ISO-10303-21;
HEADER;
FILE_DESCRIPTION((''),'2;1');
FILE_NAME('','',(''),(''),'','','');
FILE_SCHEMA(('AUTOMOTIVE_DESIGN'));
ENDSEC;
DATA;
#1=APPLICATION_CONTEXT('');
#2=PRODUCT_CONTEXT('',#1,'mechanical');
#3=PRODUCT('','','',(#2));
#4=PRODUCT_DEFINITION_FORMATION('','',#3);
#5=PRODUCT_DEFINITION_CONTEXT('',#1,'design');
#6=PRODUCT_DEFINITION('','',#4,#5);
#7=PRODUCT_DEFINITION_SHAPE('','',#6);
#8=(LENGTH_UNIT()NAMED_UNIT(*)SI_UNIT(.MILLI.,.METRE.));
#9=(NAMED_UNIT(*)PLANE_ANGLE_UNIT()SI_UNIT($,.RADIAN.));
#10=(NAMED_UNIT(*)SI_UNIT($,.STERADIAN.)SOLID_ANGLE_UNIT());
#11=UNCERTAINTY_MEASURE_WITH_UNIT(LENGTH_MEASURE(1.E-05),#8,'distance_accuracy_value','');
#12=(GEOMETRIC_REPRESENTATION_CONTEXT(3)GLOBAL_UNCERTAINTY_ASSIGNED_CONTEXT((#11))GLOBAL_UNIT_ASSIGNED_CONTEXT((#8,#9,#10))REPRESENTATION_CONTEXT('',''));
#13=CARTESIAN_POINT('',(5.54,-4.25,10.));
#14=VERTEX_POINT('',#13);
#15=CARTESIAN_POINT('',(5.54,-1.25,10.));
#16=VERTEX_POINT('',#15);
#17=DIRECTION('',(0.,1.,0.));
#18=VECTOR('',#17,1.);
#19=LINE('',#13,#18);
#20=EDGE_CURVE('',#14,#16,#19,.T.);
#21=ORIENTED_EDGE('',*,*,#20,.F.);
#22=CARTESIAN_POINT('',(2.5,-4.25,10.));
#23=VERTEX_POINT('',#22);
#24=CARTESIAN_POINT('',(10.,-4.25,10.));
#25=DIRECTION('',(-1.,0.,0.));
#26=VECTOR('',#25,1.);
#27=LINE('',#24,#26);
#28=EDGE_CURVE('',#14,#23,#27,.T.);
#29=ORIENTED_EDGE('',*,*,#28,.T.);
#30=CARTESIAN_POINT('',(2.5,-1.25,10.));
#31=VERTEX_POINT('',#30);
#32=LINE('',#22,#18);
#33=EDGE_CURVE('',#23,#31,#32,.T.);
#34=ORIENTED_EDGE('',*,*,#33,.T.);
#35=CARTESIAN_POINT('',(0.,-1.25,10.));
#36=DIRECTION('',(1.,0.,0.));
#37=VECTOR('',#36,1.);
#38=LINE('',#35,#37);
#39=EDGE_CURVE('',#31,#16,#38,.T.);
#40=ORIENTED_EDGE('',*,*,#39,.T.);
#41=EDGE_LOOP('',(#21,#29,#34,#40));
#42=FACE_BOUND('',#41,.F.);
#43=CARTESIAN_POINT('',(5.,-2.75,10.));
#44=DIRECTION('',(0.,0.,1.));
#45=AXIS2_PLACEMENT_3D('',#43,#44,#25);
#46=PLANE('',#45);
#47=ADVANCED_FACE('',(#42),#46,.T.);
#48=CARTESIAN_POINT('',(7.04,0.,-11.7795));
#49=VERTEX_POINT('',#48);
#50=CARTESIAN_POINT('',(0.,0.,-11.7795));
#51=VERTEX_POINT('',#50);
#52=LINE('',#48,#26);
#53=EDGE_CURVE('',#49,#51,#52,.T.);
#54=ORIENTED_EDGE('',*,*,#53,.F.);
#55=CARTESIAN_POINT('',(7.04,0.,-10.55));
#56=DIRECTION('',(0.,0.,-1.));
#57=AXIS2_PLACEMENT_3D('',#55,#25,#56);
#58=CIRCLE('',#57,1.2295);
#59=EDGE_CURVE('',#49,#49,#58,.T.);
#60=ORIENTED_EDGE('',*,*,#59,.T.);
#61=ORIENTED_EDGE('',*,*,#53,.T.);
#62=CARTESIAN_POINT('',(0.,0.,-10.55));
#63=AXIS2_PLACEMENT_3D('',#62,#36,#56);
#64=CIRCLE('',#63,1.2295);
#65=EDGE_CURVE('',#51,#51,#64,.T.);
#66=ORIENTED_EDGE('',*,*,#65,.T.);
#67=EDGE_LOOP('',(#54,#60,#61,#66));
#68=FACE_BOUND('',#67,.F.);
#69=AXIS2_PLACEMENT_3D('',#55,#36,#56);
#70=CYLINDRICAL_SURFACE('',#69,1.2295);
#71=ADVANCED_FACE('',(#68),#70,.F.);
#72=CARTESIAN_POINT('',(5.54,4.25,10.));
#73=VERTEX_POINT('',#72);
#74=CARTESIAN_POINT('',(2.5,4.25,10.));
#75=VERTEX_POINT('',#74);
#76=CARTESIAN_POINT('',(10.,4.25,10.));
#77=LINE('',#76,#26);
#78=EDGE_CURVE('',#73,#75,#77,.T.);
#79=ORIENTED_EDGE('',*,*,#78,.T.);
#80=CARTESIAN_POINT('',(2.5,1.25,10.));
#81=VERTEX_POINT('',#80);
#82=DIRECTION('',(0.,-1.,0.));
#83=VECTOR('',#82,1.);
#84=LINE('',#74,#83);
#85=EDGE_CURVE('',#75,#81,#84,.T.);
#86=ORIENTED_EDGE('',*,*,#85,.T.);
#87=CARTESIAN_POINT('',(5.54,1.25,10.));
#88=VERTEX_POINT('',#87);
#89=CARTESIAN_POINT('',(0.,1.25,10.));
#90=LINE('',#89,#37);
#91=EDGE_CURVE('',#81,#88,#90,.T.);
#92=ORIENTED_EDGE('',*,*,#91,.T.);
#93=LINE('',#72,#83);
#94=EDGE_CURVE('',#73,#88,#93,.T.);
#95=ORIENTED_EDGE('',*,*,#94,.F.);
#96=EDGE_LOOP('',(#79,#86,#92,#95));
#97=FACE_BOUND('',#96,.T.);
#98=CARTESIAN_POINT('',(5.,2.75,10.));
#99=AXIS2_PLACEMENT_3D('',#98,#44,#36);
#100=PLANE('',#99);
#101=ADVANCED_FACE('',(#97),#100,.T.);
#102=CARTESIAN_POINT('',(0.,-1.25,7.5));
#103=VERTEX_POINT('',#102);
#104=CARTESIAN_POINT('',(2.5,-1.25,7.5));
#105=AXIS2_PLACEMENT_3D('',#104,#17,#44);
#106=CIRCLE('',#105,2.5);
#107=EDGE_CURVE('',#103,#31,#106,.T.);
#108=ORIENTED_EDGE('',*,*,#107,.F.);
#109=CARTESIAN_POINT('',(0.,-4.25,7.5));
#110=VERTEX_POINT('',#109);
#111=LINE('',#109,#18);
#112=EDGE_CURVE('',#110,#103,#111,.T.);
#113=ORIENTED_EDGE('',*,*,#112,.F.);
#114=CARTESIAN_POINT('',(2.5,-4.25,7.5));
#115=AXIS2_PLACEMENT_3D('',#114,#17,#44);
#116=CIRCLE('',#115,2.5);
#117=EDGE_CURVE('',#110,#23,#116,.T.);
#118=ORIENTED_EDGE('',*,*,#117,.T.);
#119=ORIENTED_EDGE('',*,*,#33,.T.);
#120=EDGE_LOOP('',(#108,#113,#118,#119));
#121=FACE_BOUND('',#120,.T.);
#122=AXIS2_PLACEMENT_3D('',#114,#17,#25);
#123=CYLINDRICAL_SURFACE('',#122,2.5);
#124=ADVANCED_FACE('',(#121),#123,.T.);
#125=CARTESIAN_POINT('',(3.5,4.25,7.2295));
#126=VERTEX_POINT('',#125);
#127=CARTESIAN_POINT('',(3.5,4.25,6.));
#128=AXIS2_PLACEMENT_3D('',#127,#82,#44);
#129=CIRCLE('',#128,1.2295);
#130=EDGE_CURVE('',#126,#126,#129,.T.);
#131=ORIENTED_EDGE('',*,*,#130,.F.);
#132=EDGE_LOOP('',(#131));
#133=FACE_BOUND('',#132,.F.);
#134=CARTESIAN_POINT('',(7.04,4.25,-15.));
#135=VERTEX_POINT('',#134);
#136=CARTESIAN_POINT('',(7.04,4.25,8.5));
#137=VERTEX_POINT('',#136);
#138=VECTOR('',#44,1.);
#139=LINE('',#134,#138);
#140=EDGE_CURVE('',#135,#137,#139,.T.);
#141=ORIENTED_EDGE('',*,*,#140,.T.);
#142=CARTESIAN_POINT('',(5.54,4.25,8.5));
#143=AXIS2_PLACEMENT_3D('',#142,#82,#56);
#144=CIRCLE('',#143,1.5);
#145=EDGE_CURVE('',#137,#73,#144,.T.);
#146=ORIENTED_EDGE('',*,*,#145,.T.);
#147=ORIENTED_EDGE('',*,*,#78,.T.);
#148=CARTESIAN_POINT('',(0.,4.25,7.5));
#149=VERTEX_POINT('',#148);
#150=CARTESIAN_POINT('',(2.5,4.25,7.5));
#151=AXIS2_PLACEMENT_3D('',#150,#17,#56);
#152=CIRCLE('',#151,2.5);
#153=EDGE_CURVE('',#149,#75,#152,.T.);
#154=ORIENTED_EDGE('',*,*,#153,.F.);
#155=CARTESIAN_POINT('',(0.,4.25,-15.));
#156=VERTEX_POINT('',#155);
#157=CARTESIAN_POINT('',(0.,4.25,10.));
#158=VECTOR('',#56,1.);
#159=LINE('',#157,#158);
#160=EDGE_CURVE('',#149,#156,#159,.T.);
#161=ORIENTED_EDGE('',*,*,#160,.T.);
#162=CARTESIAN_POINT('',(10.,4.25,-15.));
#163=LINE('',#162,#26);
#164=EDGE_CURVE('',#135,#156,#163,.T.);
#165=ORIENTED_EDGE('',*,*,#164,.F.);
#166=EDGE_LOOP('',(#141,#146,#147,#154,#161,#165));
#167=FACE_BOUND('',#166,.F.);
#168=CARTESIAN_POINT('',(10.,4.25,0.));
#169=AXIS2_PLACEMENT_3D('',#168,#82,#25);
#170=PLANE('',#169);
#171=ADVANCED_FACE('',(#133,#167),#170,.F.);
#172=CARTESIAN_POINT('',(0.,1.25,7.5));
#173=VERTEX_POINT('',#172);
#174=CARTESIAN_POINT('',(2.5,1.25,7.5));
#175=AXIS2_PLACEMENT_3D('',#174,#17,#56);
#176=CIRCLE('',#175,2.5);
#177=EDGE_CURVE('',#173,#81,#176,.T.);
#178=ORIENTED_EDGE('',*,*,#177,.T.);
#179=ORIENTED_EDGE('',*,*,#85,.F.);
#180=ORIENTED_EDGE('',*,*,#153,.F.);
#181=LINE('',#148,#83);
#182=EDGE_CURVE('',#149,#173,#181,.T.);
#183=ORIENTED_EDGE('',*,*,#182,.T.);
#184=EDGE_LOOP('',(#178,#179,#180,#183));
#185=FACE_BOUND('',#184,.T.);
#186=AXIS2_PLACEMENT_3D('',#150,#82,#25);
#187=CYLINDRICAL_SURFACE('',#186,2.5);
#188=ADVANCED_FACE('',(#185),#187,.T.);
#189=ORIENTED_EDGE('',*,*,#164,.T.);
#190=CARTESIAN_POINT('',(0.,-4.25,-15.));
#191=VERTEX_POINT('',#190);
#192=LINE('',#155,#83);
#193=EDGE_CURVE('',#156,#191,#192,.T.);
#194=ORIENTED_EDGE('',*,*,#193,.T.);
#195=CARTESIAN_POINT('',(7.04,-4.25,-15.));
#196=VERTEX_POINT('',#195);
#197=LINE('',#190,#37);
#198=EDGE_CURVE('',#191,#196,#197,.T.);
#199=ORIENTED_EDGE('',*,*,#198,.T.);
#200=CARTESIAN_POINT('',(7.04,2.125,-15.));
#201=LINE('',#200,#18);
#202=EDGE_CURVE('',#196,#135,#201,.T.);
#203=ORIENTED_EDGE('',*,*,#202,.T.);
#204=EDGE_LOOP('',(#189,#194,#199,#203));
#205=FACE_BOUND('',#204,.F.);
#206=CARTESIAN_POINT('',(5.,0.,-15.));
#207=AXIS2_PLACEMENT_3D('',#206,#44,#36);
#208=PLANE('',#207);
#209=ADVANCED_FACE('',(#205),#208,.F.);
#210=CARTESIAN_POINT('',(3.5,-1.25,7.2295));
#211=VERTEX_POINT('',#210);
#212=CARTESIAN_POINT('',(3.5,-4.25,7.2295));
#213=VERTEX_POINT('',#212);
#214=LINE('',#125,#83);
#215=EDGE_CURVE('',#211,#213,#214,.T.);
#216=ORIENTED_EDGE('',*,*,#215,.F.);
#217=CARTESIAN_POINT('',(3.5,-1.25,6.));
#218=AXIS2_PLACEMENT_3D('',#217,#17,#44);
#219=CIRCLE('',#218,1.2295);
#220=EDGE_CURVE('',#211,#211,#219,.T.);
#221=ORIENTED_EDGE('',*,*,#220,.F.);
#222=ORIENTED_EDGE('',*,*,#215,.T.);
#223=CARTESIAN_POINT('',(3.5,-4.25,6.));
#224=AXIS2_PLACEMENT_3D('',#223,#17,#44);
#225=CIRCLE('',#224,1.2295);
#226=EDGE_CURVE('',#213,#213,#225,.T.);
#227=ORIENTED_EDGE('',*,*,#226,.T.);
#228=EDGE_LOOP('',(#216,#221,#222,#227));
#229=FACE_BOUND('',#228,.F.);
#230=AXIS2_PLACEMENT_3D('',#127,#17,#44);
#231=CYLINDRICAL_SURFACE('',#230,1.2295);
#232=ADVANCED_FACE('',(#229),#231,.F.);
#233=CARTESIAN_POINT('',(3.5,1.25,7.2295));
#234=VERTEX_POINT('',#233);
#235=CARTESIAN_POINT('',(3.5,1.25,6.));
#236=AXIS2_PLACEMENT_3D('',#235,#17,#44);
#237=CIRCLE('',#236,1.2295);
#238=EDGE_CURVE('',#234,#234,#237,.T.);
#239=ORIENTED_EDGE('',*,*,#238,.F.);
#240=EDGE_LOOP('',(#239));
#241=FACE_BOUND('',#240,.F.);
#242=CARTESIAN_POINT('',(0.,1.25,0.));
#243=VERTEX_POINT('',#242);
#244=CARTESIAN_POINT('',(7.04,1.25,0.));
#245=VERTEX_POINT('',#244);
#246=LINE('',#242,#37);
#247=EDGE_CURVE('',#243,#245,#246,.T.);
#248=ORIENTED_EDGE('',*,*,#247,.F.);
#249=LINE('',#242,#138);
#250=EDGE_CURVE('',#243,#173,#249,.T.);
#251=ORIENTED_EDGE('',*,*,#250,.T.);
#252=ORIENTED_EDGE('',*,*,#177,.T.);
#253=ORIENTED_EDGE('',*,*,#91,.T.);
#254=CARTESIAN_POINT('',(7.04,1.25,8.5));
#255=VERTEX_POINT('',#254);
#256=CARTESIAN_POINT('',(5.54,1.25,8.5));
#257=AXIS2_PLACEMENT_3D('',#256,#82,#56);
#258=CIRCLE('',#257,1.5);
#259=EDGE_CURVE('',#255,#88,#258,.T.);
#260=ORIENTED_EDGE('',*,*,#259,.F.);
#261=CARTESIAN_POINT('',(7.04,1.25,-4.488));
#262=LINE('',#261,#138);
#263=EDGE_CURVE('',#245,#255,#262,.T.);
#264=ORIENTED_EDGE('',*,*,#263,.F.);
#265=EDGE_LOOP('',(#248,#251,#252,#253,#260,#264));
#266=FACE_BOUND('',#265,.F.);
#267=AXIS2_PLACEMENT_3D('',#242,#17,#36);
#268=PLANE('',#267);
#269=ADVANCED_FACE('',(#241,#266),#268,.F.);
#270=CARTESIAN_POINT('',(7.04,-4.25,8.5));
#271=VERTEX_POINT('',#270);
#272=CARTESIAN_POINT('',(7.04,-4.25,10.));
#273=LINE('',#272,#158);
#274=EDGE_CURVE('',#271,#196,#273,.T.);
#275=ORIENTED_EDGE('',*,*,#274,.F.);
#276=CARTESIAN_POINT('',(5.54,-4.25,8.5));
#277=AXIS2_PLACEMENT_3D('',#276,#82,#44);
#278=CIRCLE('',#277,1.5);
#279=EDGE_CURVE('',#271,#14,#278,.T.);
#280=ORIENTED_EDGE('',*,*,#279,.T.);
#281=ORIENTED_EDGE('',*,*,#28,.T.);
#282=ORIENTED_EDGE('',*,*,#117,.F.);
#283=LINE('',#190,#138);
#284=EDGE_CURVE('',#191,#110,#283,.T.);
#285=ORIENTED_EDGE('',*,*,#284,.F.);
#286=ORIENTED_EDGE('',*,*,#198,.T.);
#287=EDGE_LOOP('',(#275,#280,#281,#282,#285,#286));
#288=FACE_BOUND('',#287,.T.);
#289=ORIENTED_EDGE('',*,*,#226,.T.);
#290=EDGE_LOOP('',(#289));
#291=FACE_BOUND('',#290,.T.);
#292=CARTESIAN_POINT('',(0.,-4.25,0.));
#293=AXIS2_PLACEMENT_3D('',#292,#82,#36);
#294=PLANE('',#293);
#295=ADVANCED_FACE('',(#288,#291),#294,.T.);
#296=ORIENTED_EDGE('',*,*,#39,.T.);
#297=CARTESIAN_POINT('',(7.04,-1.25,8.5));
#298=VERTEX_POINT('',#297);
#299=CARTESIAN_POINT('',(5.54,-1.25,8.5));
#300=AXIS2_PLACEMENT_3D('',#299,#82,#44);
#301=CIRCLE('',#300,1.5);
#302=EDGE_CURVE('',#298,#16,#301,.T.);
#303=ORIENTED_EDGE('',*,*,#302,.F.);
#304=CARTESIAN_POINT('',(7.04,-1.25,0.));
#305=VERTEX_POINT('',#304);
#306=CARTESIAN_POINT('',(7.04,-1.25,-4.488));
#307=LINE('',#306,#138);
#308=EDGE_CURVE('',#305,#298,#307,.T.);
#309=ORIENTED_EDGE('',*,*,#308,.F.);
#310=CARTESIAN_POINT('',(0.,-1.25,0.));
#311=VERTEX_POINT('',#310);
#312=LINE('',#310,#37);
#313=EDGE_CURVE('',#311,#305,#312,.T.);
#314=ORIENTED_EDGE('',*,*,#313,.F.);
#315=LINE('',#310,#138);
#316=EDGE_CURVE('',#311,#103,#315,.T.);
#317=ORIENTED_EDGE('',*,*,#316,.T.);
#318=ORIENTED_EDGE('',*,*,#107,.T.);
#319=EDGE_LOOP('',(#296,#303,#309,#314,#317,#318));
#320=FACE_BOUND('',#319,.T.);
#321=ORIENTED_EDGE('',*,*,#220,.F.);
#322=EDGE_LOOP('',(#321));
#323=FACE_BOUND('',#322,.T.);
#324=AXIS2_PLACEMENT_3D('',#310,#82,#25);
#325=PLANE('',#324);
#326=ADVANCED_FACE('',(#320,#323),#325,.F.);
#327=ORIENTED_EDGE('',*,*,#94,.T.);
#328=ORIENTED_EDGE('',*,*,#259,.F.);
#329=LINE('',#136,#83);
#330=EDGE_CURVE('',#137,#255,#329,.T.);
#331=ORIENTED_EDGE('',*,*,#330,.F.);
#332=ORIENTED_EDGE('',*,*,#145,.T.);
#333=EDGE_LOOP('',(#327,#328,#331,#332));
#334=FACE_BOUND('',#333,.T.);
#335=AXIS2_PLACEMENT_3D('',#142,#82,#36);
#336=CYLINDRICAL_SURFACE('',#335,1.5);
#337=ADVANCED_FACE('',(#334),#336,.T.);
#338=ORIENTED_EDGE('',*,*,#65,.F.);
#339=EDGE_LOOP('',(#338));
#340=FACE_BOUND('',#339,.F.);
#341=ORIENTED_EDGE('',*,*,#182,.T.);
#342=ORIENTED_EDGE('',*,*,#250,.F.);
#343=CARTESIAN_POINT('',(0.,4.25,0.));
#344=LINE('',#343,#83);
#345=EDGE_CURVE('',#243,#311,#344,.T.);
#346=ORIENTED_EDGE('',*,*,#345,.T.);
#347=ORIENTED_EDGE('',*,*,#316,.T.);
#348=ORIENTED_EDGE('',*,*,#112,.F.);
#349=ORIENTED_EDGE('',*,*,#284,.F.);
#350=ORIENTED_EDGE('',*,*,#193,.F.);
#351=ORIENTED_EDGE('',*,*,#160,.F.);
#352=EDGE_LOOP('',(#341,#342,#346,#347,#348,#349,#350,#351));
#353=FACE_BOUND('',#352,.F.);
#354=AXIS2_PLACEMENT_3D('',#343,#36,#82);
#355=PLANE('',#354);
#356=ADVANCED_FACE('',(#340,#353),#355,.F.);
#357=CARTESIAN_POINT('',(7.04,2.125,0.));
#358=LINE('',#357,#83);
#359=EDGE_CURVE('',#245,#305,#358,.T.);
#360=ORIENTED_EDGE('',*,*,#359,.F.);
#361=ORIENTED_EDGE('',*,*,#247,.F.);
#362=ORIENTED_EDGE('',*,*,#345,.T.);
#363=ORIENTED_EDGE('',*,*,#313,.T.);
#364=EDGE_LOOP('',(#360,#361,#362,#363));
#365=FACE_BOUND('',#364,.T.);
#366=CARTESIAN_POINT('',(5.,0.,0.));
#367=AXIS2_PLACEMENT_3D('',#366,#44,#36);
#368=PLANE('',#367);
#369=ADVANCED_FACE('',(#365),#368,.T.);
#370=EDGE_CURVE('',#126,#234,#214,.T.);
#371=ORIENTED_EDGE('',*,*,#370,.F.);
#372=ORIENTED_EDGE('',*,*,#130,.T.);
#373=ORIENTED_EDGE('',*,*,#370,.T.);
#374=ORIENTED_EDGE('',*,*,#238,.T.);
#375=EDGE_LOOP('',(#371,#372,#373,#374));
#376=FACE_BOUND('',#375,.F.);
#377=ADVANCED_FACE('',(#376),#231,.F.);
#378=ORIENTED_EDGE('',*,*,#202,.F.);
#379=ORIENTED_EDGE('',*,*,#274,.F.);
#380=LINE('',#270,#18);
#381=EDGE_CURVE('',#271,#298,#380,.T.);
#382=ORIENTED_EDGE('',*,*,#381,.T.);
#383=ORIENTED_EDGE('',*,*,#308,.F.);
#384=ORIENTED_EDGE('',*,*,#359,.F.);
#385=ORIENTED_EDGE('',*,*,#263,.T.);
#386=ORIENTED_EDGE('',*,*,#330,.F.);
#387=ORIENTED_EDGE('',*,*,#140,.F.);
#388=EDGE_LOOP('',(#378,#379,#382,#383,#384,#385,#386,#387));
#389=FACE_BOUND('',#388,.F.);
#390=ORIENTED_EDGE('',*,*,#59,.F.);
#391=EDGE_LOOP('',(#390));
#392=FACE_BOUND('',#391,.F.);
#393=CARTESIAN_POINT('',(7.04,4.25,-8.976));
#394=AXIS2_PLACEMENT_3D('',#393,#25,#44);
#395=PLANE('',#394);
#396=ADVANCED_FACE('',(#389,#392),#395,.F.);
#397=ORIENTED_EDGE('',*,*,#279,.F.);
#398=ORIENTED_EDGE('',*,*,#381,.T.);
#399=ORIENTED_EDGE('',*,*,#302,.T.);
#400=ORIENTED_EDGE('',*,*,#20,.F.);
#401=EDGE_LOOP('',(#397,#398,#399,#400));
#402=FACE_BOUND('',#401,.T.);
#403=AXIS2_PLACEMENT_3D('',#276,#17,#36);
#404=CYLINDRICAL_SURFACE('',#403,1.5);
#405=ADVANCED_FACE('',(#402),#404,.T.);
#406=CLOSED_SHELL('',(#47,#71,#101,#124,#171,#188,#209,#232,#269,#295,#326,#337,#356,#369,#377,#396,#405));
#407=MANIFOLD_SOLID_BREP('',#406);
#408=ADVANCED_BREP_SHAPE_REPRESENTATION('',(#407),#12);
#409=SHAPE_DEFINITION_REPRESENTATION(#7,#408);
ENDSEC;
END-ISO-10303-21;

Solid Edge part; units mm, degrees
sketch "Sketch1" plane through (0, 0, 0) normal (0, 0, 1) x (1, 0, 0)
  line L0 (0, 1.25) -> (10, 1.25)
  line L1 (10, 1.25) -> (10, 4.25)
  line L2 (10, 4.25) -> (0, 4.25)
  line L3 (0, 4.25) -> (0, 1.25)
  dimension "D1" = 3
  dimension "D2" = 10
  dimension "D3" = 1.25
extrude "Protrusion1" add sketch "Sketch1" along normal blind 10
mirror "Mirror1" about plane through (0, 0, 0) normal (0, -1, 0) of "Protrusion1"
sketch "Sketch2" plane through (3, -2.75, 0) normal (0, 0, -1) x (0, 1, 0)
  line L0 (-1.5, 7) -> (7, 7)
  line L1 (7, 7) -> (7, -3)
  line L2 (7, -3) -> (-1.5, -3)
  line L3 (-1.5, -3) -> (-1.5, 7)
extrude "Extrusionsausprägung_2" add sketch "Sketch2" along normal blind 15
hole "Bohrung_1" at (3.5, 4.25, 6) direction (0, -1, 0) diameter 2.459 end through all
fillet "Verrundung_1" radius 2.5 2 edges at (0, -2.75, 10) (0, 2.75, 10)
sketch "Sketch3" plane through (5, 4.25, 0) normal (0, 1, 0) x (-1, 0, 0)
  line L0 (-2.04, -8.976) -> (-2.04, 16.024)
  line L1 (-2.04, -8.976) -> (-2.04, -11.4934)
  dimension "D1" = 3.54
  dimension "D2" = 25
extrude "Extrusionsausschnitt_1" cut sketch "Sketch3" against normal blind 92.5 material side at (7.09, 4.25, 3.524)
hole "Bohrung_2" at (7.04, 0, -10.55) direction (-1, 0, 0) diameter 2.459 end up to next
fillet "Verrundung_2" radius 1.5 2 edges at (7.04, -2.75, 10) (7.04, 2.75, 10)
